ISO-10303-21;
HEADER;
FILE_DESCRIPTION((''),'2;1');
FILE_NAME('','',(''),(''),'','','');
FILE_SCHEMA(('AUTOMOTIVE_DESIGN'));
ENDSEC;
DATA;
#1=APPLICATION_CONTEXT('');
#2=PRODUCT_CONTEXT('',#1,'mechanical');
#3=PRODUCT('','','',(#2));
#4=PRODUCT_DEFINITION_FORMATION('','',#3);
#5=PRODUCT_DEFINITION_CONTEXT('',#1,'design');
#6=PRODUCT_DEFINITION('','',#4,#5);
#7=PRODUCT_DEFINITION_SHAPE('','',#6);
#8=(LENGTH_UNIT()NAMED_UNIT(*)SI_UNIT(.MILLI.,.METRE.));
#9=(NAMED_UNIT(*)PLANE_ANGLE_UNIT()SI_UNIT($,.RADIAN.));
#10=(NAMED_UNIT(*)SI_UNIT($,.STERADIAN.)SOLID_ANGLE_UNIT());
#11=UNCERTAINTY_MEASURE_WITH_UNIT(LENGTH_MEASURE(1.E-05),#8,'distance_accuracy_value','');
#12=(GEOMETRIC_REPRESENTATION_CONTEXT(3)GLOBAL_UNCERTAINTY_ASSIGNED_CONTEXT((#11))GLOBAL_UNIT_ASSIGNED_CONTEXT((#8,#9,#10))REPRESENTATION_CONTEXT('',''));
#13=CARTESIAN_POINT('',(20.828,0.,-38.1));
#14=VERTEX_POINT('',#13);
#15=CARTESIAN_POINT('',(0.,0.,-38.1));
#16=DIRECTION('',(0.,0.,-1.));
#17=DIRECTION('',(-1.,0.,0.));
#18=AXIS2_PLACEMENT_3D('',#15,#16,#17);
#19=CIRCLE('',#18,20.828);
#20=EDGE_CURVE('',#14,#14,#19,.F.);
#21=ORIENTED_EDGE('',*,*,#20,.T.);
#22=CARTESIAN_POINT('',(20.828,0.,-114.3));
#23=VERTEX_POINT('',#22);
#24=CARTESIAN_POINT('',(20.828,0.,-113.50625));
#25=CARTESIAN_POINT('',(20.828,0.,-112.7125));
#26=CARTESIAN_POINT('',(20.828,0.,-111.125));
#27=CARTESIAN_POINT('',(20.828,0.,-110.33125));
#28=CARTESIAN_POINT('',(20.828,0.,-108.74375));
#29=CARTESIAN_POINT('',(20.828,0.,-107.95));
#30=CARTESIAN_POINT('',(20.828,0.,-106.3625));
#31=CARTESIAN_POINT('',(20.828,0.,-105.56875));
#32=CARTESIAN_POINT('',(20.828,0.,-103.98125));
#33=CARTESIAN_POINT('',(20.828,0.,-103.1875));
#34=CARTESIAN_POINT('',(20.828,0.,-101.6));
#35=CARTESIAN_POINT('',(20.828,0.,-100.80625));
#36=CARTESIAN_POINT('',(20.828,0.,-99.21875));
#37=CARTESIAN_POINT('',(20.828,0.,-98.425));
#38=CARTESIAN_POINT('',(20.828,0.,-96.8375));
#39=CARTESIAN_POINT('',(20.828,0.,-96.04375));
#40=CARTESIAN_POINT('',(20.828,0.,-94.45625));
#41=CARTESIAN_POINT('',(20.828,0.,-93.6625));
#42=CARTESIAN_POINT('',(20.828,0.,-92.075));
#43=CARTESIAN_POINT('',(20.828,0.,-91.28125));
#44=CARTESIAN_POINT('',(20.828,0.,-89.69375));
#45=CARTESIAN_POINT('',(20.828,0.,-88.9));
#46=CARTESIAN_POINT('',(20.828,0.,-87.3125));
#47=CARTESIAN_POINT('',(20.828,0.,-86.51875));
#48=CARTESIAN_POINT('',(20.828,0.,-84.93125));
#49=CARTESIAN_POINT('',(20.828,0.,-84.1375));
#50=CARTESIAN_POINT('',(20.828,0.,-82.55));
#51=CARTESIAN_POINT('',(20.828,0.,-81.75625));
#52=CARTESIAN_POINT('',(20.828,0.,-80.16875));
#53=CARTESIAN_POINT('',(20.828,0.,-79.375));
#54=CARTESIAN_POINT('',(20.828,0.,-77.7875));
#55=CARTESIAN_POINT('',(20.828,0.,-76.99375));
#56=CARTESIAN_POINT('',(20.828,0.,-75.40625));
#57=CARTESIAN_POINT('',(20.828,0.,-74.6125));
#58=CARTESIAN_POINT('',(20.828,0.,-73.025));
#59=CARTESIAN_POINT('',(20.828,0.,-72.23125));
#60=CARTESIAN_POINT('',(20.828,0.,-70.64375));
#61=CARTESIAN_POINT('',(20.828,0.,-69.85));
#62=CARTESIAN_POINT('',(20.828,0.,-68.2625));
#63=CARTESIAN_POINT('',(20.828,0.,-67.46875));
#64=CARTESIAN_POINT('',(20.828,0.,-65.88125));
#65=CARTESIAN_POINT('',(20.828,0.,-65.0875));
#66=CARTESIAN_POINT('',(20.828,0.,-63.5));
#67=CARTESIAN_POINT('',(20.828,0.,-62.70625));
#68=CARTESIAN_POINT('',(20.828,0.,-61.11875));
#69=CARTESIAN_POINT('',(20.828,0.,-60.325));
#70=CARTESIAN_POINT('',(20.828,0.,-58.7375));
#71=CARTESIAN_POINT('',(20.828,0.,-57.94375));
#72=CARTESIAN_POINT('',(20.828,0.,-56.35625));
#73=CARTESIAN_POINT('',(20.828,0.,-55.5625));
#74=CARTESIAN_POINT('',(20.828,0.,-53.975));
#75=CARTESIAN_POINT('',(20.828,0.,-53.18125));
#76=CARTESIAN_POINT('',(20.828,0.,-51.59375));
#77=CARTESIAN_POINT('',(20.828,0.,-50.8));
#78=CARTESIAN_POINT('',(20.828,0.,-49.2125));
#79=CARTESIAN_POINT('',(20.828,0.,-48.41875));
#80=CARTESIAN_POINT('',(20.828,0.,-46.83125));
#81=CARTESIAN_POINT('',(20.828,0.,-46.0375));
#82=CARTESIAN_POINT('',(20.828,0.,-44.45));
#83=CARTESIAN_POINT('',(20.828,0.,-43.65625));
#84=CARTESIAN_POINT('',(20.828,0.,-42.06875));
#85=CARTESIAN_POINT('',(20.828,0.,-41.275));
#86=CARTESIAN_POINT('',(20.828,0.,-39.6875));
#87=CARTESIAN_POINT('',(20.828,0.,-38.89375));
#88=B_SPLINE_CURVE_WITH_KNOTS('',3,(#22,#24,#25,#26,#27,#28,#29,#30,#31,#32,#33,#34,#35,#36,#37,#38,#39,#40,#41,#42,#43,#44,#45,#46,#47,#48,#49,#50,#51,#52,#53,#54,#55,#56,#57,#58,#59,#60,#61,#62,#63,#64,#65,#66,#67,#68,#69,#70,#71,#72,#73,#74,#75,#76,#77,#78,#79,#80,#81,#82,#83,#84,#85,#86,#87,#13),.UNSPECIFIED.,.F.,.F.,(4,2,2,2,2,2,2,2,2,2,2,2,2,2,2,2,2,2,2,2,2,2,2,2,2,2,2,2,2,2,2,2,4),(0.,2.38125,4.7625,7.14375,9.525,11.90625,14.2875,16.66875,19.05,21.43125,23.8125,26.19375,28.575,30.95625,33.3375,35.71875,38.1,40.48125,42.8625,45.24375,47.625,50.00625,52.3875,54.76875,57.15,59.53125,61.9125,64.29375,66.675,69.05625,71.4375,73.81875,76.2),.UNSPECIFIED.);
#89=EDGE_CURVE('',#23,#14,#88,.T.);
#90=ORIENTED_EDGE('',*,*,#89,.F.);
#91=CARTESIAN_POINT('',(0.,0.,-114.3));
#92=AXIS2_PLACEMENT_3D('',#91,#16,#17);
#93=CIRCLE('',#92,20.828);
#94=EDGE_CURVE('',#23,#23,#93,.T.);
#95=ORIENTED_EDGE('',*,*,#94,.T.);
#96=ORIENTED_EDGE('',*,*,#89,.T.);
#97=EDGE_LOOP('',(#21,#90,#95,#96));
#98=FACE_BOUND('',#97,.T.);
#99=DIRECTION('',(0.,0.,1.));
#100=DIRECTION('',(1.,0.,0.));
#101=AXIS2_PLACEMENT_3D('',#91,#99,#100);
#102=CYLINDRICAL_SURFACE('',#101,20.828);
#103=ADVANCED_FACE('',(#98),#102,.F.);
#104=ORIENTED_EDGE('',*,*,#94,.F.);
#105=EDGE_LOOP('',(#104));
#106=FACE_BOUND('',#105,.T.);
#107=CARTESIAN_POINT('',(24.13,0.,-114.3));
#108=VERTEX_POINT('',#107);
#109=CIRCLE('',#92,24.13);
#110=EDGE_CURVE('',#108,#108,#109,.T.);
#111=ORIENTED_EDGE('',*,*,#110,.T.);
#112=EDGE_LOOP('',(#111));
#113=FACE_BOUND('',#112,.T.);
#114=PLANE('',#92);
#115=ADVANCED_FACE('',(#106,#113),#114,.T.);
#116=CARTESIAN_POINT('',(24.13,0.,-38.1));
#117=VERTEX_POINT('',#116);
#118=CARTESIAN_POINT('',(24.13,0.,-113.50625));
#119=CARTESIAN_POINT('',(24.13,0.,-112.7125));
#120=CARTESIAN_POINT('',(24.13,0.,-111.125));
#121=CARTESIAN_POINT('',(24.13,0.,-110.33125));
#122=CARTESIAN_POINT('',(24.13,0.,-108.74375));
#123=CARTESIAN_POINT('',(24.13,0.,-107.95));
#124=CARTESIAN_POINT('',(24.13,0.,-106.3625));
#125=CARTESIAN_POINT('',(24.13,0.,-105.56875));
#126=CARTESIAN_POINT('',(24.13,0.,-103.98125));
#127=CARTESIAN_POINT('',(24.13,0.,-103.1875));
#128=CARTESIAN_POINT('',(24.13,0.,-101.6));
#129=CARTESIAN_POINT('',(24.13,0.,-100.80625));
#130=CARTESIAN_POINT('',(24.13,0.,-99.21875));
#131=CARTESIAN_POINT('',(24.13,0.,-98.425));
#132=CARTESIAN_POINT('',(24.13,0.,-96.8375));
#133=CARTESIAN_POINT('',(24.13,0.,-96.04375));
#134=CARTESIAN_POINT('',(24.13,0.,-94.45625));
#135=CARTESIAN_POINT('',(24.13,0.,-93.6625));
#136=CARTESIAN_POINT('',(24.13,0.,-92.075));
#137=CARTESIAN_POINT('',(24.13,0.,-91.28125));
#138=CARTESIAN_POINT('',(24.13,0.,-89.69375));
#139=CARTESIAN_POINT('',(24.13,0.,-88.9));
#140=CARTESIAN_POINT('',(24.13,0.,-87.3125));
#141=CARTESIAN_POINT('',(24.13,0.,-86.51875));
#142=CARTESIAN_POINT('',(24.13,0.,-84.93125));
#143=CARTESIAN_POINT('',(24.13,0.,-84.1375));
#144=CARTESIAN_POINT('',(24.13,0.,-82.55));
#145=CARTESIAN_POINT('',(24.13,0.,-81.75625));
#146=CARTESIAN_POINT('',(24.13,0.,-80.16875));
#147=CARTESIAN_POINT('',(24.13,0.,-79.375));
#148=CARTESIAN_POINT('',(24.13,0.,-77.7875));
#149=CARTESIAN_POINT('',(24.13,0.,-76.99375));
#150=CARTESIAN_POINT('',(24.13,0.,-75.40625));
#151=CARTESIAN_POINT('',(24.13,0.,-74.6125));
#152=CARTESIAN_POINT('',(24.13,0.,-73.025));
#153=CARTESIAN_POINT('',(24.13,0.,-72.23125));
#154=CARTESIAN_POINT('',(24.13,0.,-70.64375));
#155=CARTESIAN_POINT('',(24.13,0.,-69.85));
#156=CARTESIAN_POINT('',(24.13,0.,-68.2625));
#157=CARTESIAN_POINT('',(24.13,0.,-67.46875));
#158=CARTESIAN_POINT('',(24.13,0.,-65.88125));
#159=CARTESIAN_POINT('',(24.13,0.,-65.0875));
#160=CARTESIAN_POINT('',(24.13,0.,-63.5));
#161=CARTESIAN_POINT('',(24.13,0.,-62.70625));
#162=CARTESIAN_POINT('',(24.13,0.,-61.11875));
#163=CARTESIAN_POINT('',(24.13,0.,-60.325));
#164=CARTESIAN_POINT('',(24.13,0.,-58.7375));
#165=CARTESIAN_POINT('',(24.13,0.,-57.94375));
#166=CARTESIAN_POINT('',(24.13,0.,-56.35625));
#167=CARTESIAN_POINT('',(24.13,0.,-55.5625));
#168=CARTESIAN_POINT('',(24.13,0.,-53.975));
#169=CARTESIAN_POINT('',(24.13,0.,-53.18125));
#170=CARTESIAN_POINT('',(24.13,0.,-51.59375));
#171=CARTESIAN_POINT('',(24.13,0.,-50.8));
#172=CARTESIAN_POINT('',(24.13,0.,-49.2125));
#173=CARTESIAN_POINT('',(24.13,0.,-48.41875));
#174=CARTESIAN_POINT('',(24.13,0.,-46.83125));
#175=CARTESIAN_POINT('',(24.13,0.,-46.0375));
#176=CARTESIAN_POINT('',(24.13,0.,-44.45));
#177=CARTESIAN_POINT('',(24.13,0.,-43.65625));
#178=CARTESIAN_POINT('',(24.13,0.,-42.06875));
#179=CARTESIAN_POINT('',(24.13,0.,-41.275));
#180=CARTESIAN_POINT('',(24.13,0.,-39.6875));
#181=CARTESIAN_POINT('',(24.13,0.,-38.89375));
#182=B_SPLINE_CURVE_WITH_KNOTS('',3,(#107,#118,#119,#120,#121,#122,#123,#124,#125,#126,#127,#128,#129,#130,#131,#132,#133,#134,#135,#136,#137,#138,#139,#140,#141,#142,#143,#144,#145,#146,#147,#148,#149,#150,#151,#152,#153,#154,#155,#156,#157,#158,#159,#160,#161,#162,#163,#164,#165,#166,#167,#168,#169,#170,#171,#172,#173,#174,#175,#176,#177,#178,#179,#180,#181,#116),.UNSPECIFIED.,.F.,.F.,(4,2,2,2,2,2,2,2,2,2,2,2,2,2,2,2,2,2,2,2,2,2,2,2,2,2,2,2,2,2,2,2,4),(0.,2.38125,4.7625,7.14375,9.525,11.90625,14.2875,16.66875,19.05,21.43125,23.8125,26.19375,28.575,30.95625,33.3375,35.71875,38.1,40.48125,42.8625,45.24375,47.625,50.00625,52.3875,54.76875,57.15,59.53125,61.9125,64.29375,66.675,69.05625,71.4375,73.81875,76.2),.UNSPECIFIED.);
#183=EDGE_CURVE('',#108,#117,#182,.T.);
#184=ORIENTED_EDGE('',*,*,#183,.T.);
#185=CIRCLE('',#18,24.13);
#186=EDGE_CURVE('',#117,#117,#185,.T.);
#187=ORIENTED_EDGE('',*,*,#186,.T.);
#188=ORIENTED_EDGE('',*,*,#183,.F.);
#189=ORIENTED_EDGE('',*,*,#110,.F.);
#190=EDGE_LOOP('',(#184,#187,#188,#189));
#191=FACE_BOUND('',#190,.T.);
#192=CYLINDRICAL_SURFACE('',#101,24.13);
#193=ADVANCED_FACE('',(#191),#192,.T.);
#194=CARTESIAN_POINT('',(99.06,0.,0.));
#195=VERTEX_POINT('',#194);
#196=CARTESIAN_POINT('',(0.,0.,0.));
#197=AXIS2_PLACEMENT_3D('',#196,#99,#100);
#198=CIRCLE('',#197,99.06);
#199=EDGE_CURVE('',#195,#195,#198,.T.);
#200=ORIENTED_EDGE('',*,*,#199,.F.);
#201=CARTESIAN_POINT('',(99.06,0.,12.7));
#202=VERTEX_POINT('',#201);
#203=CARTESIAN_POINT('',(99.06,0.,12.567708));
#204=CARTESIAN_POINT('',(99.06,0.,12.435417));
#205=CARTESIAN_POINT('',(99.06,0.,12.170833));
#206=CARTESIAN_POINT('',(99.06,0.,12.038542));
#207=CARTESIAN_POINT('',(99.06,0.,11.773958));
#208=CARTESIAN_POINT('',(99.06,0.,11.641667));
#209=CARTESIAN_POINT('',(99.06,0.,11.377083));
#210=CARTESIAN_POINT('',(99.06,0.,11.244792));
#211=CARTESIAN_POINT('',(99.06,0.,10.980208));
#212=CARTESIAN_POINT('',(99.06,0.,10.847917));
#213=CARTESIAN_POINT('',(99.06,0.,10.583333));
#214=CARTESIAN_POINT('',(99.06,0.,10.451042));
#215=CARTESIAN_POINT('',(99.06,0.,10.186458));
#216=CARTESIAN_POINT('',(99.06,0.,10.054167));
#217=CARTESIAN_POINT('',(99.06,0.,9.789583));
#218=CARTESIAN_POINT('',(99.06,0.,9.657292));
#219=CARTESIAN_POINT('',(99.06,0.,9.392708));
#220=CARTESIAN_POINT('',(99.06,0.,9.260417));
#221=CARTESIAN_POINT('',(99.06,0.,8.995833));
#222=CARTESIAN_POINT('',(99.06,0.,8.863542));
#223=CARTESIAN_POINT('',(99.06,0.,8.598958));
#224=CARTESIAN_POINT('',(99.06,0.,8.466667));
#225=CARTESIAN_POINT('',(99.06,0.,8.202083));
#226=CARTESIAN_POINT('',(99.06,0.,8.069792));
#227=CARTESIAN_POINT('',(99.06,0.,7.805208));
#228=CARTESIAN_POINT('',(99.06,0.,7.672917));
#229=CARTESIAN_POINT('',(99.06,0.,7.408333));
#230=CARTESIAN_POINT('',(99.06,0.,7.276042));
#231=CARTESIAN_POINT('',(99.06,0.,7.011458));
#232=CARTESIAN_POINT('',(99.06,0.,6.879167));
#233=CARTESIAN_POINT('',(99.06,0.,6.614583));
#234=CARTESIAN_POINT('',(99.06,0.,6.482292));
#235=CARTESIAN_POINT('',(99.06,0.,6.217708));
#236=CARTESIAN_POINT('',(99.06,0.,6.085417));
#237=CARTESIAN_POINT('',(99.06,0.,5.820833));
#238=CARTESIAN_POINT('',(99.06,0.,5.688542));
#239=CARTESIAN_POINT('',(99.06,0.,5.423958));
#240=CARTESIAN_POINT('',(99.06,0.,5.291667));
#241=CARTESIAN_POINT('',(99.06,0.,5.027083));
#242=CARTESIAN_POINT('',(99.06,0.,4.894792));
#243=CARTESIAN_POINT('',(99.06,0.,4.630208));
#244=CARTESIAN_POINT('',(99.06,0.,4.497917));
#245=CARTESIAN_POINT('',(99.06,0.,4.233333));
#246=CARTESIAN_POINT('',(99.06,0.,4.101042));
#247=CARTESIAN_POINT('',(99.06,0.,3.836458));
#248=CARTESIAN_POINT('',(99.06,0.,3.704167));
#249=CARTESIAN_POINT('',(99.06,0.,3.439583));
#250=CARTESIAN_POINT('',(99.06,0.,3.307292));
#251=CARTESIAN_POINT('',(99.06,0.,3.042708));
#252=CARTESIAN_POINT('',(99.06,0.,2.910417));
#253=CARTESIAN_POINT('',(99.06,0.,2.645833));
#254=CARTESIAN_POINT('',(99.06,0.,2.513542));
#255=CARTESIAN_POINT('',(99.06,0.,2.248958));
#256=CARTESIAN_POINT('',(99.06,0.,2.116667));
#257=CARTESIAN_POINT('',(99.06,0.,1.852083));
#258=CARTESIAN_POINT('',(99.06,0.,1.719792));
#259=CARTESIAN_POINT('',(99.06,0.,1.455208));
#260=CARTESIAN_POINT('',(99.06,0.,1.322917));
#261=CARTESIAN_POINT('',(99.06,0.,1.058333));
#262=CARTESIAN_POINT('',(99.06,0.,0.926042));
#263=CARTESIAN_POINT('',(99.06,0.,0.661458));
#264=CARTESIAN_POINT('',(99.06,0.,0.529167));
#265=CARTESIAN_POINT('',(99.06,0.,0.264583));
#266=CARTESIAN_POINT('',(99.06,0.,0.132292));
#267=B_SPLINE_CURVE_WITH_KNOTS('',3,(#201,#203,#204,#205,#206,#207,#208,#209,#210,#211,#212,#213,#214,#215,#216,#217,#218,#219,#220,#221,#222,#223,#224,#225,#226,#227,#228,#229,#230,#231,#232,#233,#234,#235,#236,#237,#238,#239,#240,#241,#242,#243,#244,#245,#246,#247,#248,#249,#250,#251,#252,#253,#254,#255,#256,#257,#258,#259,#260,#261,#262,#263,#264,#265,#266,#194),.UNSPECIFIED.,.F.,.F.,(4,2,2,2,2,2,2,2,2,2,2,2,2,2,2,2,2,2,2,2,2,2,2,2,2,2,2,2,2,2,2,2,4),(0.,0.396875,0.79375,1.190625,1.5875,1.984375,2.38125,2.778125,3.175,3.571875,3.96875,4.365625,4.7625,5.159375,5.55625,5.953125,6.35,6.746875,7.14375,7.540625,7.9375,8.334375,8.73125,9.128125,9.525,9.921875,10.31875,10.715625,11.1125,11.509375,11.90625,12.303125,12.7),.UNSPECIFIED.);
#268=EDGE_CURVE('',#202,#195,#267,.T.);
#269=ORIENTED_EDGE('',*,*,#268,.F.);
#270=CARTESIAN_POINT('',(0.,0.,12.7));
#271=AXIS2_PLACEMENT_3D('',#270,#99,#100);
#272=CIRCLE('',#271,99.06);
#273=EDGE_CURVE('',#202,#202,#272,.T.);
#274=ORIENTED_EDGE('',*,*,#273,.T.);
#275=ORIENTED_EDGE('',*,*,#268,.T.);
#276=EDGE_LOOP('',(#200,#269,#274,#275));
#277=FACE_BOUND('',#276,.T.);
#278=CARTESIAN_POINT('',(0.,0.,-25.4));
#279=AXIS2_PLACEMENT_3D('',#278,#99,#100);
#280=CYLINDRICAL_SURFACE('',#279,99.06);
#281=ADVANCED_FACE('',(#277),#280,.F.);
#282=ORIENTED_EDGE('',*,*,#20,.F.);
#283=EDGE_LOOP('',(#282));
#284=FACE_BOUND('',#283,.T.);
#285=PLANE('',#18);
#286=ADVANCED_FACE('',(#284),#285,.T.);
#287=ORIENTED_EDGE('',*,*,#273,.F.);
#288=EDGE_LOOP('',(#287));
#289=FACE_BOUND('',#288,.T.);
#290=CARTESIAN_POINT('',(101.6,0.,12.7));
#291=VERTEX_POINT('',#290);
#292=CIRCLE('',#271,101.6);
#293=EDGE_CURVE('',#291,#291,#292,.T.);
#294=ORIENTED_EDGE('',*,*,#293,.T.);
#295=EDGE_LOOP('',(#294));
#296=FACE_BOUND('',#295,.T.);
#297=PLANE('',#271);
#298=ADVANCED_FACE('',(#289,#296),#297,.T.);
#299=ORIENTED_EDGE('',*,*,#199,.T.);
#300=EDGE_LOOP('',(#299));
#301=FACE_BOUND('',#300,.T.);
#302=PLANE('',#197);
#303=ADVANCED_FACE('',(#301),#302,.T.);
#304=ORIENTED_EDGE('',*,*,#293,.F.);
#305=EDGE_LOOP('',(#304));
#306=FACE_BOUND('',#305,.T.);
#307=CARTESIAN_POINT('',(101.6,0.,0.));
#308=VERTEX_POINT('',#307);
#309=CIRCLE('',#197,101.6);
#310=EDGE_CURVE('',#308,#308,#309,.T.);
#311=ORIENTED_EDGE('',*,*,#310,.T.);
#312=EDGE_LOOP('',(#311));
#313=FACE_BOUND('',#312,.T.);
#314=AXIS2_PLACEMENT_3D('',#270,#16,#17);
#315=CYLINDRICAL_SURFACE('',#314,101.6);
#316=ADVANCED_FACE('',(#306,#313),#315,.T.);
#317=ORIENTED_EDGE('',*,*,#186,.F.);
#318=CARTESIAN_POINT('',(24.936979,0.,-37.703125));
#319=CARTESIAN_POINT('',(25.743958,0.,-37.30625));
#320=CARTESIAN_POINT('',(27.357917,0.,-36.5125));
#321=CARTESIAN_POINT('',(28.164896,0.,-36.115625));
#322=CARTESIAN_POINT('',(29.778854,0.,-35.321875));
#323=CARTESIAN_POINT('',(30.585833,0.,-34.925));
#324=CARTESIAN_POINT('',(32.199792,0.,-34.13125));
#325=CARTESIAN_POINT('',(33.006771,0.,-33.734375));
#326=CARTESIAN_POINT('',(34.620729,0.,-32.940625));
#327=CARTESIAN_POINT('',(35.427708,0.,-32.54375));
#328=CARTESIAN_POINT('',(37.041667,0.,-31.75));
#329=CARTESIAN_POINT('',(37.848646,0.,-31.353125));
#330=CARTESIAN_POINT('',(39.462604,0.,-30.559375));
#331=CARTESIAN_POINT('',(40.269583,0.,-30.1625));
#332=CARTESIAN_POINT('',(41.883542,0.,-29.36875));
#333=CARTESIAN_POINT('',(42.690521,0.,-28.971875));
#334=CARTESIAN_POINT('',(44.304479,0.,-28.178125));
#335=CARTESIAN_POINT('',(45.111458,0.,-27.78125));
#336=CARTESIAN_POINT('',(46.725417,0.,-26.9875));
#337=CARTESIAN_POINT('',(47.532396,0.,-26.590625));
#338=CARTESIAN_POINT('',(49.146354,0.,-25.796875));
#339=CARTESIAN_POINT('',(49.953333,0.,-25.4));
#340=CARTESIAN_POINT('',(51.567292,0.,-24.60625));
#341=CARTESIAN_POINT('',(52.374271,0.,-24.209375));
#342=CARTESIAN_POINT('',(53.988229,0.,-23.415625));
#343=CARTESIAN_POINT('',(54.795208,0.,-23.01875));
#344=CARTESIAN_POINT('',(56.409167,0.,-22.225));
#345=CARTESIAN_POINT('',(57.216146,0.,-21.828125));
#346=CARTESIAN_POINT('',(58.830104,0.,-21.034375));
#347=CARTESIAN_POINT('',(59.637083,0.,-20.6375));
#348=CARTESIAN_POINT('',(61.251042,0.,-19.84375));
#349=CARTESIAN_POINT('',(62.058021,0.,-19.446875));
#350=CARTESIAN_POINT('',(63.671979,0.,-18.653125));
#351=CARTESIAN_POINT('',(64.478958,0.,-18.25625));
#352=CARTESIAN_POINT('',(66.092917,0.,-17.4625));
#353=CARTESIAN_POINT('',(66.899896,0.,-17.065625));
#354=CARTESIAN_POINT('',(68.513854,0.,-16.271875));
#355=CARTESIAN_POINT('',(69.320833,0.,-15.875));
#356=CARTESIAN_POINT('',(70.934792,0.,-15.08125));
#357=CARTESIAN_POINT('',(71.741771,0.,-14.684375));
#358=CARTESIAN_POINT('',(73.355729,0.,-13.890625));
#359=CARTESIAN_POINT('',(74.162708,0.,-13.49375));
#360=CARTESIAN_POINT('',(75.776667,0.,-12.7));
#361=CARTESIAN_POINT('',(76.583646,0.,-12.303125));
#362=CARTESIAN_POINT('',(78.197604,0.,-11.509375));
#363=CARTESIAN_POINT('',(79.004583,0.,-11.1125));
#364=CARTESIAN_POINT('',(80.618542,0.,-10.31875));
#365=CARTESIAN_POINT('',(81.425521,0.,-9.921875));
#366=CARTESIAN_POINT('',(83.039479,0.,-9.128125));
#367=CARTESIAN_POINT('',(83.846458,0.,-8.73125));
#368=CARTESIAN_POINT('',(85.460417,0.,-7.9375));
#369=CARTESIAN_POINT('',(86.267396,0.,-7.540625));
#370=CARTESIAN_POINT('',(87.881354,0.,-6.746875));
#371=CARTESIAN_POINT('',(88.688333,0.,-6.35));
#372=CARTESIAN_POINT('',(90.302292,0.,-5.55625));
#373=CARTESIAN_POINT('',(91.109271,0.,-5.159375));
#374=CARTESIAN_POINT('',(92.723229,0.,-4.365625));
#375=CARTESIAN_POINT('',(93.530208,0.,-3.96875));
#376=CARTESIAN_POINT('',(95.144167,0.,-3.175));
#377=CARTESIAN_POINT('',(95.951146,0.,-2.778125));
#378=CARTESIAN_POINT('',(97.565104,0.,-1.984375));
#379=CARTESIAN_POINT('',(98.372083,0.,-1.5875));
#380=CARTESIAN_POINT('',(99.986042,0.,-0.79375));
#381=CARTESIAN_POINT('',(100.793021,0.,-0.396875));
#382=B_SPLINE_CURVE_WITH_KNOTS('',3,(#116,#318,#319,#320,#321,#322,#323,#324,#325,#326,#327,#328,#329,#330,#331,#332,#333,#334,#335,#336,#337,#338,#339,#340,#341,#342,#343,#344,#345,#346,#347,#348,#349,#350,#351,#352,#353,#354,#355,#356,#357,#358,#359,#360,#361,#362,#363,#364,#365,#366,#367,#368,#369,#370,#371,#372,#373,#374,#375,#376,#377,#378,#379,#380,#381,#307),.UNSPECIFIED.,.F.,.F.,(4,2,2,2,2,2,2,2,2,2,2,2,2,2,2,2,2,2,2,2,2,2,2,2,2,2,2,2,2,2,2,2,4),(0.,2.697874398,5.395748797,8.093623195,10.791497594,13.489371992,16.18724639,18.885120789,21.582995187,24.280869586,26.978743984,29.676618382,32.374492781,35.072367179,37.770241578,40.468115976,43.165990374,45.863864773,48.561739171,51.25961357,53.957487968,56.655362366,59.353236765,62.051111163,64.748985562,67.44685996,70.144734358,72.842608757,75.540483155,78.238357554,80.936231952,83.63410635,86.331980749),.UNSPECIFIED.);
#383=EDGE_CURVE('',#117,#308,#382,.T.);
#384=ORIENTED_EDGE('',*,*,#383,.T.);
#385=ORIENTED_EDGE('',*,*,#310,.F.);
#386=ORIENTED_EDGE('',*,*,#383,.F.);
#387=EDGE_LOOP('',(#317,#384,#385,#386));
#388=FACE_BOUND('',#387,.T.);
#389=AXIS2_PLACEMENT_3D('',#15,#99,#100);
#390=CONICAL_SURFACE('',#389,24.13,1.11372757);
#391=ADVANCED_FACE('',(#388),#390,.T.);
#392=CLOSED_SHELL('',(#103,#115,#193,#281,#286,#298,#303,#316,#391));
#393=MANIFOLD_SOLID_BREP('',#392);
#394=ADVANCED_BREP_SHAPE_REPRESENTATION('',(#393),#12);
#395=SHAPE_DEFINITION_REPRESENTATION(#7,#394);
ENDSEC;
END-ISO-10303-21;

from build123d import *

# Parameters (mm, degrees)
SKETCH1_R           = 101.6
BOSS_EXTRUDE1_DEPTH = 12.7
SKETCH4_R           = 99.06
CUT_EXTRUDE1_DEPTH  = 38.1
SKETCH6_R           = 24.13
SKETCH6_R_2         = 20.828
BOSS_EXTRUDE2_DEPTH = 76.2


with BuildPart() as part:
    # Sketch1 → Boss-Extrude1 (new body)
    with BuildSketch(Plane.XY):
        Circle(SKETCH1_R)
    extrude(amount=BOSS_EXTRUDE1_DEPTH)

    # Sketch4 → Cut-Extrude1 (cut)
    with BuildSketch(Plane.XY.offset(12.7)):
        Circle(SKETCH4_R)
    extrude(amount=-CUT_EXTRUDE1_DEPTH, mode=Mode.SUBTRACT)



with BuildPart() as body_2:
    # Sketch6 → Boss-Extrude2 (new body)
    with BuildSketch(Plane(origin=(0, 0, -38.1), x_dir=(-1, 0, 0), z_dir=(0, 0, -1))):
        with Locations(Location((0, 0, 0), (0, 0, 180))):
            Circle(SKETCH6_R)
        with Locations(Location((0, 0, 0), (0, 0, 180))):
            Circle(SKETCH6_R_2, mode=Mode.SUBTRACT)
    extrude(amount=BOSS_EXTRUDE2_DEPTH)


with BuildPart() as part_1:
    add(part.part)

    add(body_2.part)  # Loft2 merges body 2
    # Loft2: read off the stored shape, not the designer's step
    # Loft2 outline → Loft2 (revolve)
    with BuildSketch(Plane.XZ):
        Polygon((101.6, 0), (0, 0), (0, -38.1), (24.13, -38.1), align=None)
    revolve(axis=Axis((0, 0, 0), (0, 0, 1)))


solid = part_1.part
